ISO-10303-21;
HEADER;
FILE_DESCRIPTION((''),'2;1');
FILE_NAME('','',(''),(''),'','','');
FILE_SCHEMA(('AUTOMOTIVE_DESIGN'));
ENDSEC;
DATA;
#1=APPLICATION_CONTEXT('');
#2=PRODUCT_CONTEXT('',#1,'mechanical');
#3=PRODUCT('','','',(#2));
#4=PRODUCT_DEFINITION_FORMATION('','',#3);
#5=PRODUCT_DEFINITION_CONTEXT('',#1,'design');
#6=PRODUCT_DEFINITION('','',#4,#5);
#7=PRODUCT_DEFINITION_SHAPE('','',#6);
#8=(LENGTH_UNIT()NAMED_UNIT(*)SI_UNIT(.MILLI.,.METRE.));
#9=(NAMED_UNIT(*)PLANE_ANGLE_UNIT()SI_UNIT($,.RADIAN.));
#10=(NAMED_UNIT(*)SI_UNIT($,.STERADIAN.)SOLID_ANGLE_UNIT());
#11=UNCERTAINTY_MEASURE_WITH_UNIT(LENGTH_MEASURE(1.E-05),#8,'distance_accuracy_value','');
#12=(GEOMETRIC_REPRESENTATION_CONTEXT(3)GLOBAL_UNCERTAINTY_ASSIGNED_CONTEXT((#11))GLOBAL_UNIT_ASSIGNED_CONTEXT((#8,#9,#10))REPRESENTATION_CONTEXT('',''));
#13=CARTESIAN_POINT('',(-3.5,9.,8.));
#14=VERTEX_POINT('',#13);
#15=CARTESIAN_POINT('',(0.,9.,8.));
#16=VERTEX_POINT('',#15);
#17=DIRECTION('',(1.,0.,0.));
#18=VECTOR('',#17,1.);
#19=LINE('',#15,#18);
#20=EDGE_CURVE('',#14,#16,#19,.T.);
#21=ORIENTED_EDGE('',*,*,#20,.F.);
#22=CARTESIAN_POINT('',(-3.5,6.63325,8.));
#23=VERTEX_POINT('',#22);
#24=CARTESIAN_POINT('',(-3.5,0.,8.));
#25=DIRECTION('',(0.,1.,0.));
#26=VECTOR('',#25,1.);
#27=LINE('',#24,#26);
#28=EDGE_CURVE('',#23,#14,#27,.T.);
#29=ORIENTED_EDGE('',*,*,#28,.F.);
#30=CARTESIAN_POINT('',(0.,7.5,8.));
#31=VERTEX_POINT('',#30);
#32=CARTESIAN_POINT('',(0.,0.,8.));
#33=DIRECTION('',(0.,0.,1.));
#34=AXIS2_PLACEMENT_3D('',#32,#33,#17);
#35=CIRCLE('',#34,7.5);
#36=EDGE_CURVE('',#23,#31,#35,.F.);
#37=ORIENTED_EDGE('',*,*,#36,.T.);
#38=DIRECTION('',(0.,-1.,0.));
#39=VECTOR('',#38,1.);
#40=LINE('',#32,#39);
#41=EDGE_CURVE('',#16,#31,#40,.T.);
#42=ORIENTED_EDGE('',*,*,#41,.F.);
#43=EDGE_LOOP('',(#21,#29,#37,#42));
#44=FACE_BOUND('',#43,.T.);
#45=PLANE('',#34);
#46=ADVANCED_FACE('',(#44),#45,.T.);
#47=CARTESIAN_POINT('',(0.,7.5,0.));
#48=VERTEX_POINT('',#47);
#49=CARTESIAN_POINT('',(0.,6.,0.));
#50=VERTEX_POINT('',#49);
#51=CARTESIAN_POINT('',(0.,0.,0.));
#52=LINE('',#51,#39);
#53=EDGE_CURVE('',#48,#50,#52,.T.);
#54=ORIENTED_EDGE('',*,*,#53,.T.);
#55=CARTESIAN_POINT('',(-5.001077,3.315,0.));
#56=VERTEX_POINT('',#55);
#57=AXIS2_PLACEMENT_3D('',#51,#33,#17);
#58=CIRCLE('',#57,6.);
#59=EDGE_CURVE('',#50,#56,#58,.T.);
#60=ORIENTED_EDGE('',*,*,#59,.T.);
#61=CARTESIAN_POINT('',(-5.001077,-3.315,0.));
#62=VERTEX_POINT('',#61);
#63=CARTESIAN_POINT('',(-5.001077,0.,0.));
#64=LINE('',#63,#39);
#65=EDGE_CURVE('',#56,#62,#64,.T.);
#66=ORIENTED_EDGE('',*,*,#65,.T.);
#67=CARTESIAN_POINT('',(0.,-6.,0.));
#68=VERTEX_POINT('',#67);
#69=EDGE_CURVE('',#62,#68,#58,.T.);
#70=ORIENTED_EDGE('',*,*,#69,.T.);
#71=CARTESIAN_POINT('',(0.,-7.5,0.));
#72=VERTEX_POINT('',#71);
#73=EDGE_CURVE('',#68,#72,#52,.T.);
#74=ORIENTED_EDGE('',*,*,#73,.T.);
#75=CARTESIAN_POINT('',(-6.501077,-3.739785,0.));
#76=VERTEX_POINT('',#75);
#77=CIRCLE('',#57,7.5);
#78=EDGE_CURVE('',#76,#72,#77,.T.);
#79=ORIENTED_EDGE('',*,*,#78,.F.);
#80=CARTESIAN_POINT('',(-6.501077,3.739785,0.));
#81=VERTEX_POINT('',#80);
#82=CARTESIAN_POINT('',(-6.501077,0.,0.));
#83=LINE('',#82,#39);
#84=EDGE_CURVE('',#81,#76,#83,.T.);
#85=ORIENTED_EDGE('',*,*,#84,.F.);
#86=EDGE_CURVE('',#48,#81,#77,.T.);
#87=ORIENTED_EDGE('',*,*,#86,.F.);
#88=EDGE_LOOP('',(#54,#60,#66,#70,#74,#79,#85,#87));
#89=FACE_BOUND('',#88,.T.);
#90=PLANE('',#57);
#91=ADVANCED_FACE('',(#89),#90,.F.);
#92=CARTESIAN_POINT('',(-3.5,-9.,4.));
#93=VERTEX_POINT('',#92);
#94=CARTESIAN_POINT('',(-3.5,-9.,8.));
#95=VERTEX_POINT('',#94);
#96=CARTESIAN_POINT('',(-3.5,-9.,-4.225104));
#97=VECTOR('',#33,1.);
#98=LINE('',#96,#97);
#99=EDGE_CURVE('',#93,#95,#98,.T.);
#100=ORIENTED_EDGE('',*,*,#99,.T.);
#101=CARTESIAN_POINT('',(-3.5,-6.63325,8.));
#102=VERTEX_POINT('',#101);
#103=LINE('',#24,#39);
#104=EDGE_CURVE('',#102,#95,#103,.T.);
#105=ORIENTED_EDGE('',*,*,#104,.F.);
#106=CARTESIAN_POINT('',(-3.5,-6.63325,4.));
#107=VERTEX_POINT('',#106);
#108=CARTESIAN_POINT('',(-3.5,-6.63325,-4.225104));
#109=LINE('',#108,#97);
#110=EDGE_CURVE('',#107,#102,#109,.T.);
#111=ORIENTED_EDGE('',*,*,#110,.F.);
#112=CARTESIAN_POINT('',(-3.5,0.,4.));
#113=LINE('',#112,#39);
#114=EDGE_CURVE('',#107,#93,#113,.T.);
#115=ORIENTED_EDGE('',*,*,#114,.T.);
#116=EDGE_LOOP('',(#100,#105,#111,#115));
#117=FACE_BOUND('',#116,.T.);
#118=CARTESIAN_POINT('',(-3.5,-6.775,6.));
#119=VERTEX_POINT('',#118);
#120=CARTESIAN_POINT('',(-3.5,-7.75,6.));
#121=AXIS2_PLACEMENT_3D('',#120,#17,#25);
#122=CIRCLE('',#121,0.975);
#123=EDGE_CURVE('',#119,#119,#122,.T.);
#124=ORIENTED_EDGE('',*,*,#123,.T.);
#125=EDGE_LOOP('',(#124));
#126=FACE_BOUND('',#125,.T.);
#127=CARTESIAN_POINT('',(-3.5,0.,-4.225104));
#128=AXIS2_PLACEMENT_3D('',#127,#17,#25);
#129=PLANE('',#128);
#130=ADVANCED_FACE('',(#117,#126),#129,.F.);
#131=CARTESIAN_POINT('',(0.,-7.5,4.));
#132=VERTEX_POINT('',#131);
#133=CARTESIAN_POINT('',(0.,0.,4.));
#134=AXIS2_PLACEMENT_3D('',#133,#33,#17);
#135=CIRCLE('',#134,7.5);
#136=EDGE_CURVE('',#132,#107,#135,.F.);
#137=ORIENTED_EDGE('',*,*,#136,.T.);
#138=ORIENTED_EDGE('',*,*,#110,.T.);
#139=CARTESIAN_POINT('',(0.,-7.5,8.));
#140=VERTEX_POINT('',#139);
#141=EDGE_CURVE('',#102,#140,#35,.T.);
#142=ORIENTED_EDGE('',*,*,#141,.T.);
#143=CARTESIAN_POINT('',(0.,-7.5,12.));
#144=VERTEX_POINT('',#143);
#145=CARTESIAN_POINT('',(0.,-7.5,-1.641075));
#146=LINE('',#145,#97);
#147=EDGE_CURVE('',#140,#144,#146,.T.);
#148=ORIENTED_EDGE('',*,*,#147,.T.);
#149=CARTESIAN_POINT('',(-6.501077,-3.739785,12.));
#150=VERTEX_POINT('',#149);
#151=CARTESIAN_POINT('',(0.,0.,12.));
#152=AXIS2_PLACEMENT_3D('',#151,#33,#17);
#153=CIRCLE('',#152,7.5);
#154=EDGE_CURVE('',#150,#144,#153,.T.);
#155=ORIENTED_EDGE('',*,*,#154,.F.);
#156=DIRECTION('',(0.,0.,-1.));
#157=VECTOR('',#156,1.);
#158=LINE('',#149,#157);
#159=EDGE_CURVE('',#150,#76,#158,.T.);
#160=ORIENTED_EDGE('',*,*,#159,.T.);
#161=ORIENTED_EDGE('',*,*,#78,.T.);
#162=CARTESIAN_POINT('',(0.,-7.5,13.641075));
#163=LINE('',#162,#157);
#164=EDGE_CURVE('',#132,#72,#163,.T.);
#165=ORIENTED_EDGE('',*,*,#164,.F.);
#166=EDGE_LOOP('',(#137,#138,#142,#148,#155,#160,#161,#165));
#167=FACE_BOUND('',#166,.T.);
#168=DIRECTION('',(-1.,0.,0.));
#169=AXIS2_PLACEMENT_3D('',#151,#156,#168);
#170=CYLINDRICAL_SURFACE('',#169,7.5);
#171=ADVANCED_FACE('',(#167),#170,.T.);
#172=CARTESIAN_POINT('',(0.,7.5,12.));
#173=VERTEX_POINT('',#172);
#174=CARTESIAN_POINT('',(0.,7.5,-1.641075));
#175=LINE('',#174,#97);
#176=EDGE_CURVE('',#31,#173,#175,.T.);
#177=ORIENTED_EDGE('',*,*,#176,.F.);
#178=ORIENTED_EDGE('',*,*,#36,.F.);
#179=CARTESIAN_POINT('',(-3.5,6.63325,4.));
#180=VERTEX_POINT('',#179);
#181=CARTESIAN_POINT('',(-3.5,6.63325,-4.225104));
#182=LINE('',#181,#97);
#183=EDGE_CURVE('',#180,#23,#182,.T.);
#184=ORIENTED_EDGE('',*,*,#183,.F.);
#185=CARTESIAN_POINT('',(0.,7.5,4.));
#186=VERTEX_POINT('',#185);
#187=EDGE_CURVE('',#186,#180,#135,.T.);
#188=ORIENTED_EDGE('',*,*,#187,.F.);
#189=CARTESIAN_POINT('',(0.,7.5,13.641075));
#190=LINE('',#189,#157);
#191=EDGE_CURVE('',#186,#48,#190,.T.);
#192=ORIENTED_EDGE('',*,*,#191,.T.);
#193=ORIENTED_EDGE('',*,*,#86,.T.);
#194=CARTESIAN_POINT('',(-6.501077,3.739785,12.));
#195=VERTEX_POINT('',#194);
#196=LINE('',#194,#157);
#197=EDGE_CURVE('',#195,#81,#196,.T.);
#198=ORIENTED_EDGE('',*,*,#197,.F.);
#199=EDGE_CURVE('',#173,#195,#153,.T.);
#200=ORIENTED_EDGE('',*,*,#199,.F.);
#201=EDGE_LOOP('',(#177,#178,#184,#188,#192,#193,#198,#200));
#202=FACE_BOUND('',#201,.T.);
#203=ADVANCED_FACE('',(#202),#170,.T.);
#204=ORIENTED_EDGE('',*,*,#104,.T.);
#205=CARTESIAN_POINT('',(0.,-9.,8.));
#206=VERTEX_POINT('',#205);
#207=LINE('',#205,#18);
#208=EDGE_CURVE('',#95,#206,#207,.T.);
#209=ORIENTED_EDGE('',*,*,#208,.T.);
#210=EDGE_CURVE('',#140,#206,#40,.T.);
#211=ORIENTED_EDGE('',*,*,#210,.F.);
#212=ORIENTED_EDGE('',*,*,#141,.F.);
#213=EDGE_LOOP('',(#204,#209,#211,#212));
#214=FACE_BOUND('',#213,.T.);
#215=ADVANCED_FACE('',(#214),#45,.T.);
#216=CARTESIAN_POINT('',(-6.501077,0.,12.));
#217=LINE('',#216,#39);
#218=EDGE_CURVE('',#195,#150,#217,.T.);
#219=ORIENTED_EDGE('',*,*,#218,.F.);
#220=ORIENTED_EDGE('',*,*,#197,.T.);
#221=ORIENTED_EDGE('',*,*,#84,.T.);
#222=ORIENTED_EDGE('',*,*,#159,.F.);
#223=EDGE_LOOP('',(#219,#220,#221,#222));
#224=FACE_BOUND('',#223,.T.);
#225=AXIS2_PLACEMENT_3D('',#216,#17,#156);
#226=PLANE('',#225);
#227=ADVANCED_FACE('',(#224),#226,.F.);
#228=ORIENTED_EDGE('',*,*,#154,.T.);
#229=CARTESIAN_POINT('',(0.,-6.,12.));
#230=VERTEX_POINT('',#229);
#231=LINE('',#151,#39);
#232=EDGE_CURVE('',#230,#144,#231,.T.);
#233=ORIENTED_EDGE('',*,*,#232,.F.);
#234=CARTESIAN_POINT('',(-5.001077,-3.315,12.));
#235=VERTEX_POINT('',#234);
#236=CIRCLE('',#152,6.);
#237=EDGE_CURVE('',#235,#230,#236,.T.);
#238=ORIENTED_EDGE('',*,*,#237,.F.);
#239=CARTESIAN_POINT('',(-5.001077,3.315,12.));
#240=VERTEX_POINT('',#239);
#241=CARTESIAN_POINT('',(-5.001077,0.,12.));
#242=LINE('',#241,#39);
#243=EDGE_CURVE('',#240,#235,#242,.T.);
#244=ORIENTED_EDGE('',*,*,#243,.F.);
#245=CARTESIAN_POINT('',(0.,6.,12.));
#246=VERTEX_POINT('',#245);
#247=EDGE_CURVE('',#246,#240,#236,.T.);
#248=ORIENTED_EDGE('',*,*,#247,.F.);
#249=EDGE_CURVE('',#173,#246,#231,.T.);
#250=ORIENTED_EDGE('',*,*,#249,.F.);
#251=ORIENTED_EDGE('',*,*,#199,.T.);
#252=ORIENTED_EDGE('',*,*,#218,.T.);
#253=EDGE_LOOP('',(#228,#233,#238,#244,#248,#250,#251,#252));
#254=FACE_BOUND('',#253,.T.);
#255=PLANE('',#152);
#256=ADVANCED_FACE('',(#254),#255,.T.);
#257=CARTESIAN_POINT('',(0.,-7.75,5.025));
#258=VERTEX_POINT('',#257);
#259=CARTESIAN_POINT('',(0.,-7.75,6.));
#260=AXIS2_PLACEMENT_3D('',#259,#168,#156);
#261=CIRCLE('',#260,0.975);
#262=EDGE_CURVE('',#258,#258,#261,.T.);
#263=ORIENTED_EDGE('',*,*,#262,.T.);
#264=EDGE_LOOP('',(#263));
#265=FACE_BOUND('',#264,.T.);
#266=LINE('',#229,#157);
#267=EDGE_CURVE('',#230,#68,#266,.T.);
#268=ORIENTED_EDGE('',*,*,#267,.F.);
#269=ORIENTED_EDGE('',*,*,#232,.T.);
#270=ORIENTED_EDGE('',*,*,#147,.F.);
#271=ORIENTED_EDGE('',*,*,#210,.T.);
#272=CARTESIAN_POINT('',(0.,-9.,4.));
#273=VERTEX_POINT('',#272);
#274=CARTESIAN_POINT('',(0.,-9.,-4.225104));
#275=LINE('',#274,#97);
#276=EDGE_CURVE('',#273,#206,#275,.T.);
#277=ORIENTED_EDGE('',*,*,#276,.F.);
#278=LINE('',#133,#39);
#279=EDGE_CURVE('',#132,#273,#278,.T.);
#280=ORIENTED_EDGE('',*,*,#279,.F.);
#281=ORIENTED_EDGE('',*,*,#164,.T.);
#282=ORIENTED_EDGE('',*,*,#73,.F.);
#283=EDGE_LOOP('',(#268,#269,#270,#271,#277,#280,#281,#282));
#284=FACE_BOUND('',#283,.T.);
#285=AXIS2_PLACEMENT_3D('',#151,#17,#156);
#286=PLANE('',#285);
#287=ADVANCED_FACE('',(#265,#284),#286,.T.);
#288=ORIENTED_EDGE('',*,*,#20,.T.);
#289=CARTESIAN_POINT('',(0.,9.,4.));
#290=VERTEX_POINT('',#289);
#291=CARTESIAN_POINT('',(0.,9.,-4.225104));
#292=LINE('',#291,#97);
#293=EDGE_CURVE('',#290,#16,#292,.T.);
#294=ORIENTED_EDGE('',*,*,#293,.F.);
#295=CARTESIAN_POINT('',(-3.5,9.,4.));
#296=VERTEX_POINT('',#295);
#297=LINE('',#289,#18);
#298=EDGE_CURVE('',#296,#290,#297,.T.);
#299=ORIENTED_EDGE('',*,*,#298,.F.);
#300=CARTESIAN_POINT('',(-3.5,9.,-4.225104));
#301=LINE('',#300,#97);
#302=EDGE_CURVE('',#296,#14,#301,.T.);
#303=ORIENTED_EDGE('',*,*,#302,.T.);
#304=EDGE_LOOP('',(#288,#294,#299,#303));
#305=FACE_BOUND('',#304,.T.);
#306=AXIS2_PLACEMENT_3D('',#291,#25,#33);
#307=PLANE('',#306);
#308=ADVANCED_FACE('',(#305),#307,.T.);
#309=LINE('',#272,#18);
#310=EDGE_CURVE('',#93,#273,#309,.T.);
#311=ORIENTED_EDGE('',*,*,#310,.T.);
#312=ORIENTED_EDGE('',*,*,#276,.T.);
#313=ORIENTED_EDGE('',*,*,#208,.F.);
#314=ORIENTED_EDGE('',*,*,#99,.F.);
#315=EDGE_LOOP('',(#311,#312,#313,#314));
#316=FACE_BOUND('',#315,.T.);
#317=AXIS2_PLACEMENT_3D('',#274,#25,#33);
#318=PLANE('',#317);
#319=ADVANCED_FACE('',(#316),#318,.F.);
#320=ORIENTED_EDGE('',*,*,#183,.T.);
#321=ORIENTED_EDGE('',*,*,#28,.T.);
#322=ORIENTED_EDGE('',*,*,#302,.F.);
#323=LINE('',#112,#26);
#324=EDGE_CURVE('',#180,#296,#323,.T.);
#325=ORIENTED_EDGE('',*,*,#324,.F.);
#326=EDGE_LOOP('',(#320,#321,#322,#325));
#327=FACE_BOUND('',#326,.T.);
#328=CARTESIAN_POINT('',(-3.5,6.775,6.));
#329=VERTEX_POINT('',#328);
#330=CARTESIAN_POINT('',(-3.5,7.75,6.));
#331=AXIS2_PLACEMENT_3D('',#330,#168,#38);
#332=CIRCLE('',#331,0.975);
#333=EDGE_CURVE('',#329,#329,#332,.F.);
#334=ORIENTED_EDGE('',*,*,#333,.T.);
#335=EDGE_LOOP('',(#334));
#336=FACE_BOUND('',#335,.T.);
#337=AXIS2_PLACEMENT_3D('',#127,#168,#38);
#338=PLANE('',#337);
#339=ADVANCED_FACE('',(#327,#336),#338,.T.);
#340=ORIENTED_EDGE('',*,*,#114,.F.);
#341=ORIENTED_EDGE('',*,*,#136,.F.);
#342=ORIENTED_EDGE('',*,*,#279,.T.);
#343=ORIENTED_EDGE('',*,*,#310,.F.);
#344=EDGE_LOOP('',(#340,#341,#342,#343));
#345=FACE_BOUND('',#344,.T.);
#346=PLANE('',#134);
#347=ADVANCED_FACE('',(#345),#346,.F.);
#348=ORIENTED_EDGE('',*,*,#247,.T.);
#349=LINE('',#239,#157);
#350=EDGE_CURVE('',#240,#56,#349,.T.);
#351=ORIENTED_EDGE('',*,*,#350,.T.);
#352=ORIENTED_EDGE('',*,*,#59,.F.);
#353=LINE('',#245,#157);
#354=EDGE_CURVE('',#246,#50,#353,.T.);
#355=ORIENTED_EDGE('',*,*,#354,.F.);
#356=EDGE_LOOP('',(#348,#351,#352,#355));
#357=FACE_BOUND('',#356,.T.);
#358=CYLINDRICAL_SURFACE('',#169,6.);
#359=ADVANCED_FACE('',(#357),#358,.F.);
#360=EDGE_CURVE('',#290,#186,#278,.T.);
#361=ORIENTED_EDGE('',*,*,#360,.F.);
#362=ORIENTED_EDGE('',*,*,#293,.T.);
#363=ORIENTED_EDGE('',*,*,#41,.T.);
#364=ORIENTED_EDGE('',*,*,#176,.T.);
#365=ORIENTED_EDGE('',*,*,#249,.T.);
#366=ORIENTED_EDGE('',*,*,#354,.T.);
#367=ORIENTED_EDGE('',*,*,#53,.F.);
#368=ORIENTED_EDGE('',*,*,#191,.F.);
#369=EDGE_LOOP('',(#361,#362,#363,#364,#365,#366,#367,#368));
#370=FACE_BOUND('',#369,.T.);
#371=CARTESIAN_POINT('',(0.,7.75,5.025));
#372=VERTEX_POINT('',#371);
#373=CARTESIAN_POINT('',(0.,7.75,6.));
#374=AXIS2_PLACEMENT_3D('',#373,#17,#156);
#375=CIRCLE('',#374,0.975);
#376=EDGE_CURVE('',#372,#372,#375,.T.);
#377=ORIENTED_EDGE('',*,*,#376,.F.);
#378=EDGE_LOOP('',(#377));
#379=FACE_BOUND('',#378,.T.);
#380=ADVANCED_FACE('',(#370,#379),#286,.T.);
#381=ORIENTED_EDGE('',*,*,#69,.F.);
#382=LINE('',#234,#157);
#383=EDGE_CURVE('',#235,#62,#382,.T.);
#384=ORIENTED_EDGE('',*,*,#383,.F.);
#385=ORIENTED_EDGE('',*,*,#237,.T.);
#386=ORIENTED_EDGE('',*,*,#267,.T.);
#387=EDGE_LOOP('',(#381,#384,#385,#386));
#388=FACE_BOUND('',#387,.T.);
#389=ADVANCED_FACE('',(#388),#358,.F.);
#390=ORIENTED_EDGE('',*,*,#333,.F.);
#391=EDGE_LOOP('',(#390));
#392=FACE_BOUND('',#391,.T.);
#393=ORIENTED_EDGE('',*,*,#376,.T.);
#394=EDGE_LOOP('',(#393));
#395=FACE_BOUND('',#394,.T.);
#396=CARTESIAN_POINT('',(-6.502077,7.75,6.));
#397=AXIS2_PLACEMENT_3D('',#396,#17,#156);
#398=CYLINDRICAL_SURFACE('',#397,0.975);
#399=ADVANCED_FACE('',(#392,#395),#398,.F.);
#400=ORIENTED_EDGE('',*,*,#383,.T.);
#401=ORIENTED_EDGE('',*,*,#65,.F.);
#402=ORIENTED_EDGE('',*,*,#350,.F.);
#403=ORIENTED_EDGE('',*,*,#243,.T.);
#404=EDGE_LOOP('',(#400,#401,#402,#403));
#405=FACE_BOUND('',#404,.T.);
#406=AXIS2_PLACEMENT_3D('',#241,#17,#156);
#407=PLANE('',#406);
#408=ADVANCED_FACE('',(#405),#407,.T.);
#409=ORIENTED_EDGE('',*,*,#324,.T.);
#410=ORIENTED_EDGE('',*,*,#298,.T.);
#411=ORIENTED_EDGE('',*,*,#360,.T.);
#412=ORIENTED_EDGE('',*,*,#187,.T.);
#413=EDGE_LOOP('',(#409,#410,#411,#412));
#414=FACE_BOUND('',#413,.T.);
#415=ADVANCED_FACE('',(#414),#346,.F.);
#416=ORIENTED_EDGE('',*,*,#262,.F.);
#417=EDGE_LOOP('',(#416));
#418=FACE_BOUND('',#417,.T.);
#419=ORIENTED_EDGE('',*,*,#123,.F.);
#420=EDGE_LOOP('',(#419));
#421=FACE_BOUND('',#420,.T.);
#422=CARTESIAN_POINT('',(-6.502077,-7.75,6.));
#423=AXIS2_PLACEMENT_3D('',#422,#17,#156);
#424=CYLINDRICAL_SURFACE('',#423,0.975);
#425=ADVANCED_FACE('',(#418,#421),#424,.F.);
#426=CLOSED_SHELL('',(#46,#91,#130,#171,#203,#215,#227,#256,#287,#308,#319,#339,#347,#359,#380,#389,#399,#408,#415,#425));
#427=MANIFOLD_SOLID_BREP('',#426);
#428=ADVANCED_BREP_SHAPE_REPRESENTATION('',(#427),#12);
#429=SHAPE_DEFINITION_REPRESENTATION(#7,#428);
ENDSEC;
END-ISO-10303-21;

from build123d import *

# Parameters (mm, degrees)
BOSS_EXTRUDE2_DEPTH  = 12
BOSS_EXTRUDE3_START  = -12
BOSS_EXTRUDE3_DEPTH  = 12
CUT_EXTRUDE6_START   = -4
CUT_EXTRUDE6_DEPTH   = 4
CUT_EXTRUDE7_REACH   = 18.348
SKETCH4_R            = 0.975
MIRROR2_START        = -4
MIRROR2_COPY_1_DEPTH = 4


# Read off the part's stored shape, not the designer's step: Boss-Extrude3
with BuildPart() as part:
    # Sketch1 → Boss-Extrude2 (new body)
    with BuildSketch(Plane.XY):
        with BuildLine():
            Line((0, 6), (0, 7.5))
            ThreePointArc((0, 7.5), (-3.75510396, 6.492241081), (-6.501077384, 3.739785134))
            Line((-6.501077384, 3.739785134), (-6.501077384, -3.739785134))
            ThreePointArc((-6.501077384, -3.739785134), (-3.75510396, -6.492241081), (0, -7.5))
            Line((0, -7.5), (0, -6))
            ThreePointArc((0, -6), (-2.838133189, -5.286303056), (-5.001077384, -3.315))
            ThreePointArc((-5.001077384, -3.315), (-6, 0), (-5.001077384, 3.315))
            ThreePointArc((-5.001077384, 3.315), (-2.838133189, 5.286303056), (0, 6))
        make_face()
        with BuildLine():
            Line((-5.001077384, -3.315), (-5.001077384, 3.315))
            ThreePointArc((-5.001077384, 3.315), (-6, 0), (-5.001077384, -3.315))
        make_face()
    extrude(amount=BOSS_EXTRUDE2_DEPTH)

    # Boss-Extrude3 outline → Boss-Extrude3 (add)
    with BuildSketch(Plane.XY.offset(12).offset(BOSS_EXTRUDE3_START)):
        with BuildLine():
            ThreePointArc((-3.5, 6.633249581), (-1.802862744, 7.280088319), (0, 7.5))
            Line((0, 7.5), (0, 9))
            Line((0, 9), (-3.5, 9))
            Line((-3.5, 9), (-3.5, 6.633249581))
        make_face()
    boss_extrude3 = extrude(amount=BOSS_EXTRUDE3_DEPTH)

    # Sketch3 → Cut-Extrude6 (cut)
    with BuildSketch(Plane.XY.offset(12).offset(CUT_EXTRUDE6_START)):
        with BuildLine():
            Line((-4.617876388, 10.846765639), (-4.617876388, 5.909756142))
            ThreePointArc((-4.617876388, 5.909756142), (-1.858071818, 7.266193578), (1.214101671, 7.401078106))
            Line((1.214101671, 7.401078106), (1.214101671, 10.846765639))
            Line((1.214101671, 10.846765639), (-4.617876388, 10.846765639))
        make_face()
    cut_extrude6 = extrude(amount=CUT_EXTRUDE6_DEPTH, mode=Mode.SUBTRACT)

    # Mirror1: Cut-Extrude6 across plane
    add(cut_extrude6.mirror(Plane.XY.offset(6)), mode=Mode.SUBTRACT)

    # Sketch4 → Cut-Extrude7 (cut, up to next)
    with BuildSketch(Plane(origin=(0, 0, 0), x_dir=(0, 0, -1), z_dir=(1, 0, 0)), mode=Mode.PRIVATE) as cut_extrude7_sk1:
        with Locations((-6, 7.75)):
            Circle(SKETCH4_R)
    cut_extrude7_tool1 = extrude(cut_extrude7_sk1.sketch, amount=-CUT_EXTRUDE7_REACH, mode=Mode.PRIVATE) & part.part
    cut_extrude7 = cut_extrude7_tool1.solids().sort_by_distance((0, 7.75, 6))[0]
    add(cut_extrude7, mode=Mode.SUBTRACT)

    # Mirror2: Boss-Extrude3, Cut-Extrude6, Cut-Extrude7 across plane
    add(boss_extrude3.mirror(Plane.ZX))
    add(cut_extrude6.mirror(Plane.ZX), mode=Mode.SUBTRACT)
    add(cut_extrude7.mirror(Plane.ZX), mode=Mode.SUBTRACT)

    # Mirror2 copy 1 sketch → Mirror2 copy 1 (cut)
    with BuildSketch(Plane(origin=(0, 0, 0), x_dir=(1, 0, 0), z_dir=(0, 0, -1)).offset(MIRROR2_START)):
        with BuildLine():
            Line((-4.617876388, 10.846765639), (-4.617876388, 5.909756142))
            ThreePointArc((-4.617876388, 5.909756142), (-1.858071818, 7.266193578), (1.214101671, 7.401078106))
            Line((1.214101671, 7.401078106), (1.214101671, 10.846765639))
            Line((1.214101671, 10.846765639), (-4.617876388, 10.846765639))
        make_face()
    extrude(amount=MIRROR2_COPY_1_DEPTH, mode=Mode.SUBTRACT)


solid = part.part
